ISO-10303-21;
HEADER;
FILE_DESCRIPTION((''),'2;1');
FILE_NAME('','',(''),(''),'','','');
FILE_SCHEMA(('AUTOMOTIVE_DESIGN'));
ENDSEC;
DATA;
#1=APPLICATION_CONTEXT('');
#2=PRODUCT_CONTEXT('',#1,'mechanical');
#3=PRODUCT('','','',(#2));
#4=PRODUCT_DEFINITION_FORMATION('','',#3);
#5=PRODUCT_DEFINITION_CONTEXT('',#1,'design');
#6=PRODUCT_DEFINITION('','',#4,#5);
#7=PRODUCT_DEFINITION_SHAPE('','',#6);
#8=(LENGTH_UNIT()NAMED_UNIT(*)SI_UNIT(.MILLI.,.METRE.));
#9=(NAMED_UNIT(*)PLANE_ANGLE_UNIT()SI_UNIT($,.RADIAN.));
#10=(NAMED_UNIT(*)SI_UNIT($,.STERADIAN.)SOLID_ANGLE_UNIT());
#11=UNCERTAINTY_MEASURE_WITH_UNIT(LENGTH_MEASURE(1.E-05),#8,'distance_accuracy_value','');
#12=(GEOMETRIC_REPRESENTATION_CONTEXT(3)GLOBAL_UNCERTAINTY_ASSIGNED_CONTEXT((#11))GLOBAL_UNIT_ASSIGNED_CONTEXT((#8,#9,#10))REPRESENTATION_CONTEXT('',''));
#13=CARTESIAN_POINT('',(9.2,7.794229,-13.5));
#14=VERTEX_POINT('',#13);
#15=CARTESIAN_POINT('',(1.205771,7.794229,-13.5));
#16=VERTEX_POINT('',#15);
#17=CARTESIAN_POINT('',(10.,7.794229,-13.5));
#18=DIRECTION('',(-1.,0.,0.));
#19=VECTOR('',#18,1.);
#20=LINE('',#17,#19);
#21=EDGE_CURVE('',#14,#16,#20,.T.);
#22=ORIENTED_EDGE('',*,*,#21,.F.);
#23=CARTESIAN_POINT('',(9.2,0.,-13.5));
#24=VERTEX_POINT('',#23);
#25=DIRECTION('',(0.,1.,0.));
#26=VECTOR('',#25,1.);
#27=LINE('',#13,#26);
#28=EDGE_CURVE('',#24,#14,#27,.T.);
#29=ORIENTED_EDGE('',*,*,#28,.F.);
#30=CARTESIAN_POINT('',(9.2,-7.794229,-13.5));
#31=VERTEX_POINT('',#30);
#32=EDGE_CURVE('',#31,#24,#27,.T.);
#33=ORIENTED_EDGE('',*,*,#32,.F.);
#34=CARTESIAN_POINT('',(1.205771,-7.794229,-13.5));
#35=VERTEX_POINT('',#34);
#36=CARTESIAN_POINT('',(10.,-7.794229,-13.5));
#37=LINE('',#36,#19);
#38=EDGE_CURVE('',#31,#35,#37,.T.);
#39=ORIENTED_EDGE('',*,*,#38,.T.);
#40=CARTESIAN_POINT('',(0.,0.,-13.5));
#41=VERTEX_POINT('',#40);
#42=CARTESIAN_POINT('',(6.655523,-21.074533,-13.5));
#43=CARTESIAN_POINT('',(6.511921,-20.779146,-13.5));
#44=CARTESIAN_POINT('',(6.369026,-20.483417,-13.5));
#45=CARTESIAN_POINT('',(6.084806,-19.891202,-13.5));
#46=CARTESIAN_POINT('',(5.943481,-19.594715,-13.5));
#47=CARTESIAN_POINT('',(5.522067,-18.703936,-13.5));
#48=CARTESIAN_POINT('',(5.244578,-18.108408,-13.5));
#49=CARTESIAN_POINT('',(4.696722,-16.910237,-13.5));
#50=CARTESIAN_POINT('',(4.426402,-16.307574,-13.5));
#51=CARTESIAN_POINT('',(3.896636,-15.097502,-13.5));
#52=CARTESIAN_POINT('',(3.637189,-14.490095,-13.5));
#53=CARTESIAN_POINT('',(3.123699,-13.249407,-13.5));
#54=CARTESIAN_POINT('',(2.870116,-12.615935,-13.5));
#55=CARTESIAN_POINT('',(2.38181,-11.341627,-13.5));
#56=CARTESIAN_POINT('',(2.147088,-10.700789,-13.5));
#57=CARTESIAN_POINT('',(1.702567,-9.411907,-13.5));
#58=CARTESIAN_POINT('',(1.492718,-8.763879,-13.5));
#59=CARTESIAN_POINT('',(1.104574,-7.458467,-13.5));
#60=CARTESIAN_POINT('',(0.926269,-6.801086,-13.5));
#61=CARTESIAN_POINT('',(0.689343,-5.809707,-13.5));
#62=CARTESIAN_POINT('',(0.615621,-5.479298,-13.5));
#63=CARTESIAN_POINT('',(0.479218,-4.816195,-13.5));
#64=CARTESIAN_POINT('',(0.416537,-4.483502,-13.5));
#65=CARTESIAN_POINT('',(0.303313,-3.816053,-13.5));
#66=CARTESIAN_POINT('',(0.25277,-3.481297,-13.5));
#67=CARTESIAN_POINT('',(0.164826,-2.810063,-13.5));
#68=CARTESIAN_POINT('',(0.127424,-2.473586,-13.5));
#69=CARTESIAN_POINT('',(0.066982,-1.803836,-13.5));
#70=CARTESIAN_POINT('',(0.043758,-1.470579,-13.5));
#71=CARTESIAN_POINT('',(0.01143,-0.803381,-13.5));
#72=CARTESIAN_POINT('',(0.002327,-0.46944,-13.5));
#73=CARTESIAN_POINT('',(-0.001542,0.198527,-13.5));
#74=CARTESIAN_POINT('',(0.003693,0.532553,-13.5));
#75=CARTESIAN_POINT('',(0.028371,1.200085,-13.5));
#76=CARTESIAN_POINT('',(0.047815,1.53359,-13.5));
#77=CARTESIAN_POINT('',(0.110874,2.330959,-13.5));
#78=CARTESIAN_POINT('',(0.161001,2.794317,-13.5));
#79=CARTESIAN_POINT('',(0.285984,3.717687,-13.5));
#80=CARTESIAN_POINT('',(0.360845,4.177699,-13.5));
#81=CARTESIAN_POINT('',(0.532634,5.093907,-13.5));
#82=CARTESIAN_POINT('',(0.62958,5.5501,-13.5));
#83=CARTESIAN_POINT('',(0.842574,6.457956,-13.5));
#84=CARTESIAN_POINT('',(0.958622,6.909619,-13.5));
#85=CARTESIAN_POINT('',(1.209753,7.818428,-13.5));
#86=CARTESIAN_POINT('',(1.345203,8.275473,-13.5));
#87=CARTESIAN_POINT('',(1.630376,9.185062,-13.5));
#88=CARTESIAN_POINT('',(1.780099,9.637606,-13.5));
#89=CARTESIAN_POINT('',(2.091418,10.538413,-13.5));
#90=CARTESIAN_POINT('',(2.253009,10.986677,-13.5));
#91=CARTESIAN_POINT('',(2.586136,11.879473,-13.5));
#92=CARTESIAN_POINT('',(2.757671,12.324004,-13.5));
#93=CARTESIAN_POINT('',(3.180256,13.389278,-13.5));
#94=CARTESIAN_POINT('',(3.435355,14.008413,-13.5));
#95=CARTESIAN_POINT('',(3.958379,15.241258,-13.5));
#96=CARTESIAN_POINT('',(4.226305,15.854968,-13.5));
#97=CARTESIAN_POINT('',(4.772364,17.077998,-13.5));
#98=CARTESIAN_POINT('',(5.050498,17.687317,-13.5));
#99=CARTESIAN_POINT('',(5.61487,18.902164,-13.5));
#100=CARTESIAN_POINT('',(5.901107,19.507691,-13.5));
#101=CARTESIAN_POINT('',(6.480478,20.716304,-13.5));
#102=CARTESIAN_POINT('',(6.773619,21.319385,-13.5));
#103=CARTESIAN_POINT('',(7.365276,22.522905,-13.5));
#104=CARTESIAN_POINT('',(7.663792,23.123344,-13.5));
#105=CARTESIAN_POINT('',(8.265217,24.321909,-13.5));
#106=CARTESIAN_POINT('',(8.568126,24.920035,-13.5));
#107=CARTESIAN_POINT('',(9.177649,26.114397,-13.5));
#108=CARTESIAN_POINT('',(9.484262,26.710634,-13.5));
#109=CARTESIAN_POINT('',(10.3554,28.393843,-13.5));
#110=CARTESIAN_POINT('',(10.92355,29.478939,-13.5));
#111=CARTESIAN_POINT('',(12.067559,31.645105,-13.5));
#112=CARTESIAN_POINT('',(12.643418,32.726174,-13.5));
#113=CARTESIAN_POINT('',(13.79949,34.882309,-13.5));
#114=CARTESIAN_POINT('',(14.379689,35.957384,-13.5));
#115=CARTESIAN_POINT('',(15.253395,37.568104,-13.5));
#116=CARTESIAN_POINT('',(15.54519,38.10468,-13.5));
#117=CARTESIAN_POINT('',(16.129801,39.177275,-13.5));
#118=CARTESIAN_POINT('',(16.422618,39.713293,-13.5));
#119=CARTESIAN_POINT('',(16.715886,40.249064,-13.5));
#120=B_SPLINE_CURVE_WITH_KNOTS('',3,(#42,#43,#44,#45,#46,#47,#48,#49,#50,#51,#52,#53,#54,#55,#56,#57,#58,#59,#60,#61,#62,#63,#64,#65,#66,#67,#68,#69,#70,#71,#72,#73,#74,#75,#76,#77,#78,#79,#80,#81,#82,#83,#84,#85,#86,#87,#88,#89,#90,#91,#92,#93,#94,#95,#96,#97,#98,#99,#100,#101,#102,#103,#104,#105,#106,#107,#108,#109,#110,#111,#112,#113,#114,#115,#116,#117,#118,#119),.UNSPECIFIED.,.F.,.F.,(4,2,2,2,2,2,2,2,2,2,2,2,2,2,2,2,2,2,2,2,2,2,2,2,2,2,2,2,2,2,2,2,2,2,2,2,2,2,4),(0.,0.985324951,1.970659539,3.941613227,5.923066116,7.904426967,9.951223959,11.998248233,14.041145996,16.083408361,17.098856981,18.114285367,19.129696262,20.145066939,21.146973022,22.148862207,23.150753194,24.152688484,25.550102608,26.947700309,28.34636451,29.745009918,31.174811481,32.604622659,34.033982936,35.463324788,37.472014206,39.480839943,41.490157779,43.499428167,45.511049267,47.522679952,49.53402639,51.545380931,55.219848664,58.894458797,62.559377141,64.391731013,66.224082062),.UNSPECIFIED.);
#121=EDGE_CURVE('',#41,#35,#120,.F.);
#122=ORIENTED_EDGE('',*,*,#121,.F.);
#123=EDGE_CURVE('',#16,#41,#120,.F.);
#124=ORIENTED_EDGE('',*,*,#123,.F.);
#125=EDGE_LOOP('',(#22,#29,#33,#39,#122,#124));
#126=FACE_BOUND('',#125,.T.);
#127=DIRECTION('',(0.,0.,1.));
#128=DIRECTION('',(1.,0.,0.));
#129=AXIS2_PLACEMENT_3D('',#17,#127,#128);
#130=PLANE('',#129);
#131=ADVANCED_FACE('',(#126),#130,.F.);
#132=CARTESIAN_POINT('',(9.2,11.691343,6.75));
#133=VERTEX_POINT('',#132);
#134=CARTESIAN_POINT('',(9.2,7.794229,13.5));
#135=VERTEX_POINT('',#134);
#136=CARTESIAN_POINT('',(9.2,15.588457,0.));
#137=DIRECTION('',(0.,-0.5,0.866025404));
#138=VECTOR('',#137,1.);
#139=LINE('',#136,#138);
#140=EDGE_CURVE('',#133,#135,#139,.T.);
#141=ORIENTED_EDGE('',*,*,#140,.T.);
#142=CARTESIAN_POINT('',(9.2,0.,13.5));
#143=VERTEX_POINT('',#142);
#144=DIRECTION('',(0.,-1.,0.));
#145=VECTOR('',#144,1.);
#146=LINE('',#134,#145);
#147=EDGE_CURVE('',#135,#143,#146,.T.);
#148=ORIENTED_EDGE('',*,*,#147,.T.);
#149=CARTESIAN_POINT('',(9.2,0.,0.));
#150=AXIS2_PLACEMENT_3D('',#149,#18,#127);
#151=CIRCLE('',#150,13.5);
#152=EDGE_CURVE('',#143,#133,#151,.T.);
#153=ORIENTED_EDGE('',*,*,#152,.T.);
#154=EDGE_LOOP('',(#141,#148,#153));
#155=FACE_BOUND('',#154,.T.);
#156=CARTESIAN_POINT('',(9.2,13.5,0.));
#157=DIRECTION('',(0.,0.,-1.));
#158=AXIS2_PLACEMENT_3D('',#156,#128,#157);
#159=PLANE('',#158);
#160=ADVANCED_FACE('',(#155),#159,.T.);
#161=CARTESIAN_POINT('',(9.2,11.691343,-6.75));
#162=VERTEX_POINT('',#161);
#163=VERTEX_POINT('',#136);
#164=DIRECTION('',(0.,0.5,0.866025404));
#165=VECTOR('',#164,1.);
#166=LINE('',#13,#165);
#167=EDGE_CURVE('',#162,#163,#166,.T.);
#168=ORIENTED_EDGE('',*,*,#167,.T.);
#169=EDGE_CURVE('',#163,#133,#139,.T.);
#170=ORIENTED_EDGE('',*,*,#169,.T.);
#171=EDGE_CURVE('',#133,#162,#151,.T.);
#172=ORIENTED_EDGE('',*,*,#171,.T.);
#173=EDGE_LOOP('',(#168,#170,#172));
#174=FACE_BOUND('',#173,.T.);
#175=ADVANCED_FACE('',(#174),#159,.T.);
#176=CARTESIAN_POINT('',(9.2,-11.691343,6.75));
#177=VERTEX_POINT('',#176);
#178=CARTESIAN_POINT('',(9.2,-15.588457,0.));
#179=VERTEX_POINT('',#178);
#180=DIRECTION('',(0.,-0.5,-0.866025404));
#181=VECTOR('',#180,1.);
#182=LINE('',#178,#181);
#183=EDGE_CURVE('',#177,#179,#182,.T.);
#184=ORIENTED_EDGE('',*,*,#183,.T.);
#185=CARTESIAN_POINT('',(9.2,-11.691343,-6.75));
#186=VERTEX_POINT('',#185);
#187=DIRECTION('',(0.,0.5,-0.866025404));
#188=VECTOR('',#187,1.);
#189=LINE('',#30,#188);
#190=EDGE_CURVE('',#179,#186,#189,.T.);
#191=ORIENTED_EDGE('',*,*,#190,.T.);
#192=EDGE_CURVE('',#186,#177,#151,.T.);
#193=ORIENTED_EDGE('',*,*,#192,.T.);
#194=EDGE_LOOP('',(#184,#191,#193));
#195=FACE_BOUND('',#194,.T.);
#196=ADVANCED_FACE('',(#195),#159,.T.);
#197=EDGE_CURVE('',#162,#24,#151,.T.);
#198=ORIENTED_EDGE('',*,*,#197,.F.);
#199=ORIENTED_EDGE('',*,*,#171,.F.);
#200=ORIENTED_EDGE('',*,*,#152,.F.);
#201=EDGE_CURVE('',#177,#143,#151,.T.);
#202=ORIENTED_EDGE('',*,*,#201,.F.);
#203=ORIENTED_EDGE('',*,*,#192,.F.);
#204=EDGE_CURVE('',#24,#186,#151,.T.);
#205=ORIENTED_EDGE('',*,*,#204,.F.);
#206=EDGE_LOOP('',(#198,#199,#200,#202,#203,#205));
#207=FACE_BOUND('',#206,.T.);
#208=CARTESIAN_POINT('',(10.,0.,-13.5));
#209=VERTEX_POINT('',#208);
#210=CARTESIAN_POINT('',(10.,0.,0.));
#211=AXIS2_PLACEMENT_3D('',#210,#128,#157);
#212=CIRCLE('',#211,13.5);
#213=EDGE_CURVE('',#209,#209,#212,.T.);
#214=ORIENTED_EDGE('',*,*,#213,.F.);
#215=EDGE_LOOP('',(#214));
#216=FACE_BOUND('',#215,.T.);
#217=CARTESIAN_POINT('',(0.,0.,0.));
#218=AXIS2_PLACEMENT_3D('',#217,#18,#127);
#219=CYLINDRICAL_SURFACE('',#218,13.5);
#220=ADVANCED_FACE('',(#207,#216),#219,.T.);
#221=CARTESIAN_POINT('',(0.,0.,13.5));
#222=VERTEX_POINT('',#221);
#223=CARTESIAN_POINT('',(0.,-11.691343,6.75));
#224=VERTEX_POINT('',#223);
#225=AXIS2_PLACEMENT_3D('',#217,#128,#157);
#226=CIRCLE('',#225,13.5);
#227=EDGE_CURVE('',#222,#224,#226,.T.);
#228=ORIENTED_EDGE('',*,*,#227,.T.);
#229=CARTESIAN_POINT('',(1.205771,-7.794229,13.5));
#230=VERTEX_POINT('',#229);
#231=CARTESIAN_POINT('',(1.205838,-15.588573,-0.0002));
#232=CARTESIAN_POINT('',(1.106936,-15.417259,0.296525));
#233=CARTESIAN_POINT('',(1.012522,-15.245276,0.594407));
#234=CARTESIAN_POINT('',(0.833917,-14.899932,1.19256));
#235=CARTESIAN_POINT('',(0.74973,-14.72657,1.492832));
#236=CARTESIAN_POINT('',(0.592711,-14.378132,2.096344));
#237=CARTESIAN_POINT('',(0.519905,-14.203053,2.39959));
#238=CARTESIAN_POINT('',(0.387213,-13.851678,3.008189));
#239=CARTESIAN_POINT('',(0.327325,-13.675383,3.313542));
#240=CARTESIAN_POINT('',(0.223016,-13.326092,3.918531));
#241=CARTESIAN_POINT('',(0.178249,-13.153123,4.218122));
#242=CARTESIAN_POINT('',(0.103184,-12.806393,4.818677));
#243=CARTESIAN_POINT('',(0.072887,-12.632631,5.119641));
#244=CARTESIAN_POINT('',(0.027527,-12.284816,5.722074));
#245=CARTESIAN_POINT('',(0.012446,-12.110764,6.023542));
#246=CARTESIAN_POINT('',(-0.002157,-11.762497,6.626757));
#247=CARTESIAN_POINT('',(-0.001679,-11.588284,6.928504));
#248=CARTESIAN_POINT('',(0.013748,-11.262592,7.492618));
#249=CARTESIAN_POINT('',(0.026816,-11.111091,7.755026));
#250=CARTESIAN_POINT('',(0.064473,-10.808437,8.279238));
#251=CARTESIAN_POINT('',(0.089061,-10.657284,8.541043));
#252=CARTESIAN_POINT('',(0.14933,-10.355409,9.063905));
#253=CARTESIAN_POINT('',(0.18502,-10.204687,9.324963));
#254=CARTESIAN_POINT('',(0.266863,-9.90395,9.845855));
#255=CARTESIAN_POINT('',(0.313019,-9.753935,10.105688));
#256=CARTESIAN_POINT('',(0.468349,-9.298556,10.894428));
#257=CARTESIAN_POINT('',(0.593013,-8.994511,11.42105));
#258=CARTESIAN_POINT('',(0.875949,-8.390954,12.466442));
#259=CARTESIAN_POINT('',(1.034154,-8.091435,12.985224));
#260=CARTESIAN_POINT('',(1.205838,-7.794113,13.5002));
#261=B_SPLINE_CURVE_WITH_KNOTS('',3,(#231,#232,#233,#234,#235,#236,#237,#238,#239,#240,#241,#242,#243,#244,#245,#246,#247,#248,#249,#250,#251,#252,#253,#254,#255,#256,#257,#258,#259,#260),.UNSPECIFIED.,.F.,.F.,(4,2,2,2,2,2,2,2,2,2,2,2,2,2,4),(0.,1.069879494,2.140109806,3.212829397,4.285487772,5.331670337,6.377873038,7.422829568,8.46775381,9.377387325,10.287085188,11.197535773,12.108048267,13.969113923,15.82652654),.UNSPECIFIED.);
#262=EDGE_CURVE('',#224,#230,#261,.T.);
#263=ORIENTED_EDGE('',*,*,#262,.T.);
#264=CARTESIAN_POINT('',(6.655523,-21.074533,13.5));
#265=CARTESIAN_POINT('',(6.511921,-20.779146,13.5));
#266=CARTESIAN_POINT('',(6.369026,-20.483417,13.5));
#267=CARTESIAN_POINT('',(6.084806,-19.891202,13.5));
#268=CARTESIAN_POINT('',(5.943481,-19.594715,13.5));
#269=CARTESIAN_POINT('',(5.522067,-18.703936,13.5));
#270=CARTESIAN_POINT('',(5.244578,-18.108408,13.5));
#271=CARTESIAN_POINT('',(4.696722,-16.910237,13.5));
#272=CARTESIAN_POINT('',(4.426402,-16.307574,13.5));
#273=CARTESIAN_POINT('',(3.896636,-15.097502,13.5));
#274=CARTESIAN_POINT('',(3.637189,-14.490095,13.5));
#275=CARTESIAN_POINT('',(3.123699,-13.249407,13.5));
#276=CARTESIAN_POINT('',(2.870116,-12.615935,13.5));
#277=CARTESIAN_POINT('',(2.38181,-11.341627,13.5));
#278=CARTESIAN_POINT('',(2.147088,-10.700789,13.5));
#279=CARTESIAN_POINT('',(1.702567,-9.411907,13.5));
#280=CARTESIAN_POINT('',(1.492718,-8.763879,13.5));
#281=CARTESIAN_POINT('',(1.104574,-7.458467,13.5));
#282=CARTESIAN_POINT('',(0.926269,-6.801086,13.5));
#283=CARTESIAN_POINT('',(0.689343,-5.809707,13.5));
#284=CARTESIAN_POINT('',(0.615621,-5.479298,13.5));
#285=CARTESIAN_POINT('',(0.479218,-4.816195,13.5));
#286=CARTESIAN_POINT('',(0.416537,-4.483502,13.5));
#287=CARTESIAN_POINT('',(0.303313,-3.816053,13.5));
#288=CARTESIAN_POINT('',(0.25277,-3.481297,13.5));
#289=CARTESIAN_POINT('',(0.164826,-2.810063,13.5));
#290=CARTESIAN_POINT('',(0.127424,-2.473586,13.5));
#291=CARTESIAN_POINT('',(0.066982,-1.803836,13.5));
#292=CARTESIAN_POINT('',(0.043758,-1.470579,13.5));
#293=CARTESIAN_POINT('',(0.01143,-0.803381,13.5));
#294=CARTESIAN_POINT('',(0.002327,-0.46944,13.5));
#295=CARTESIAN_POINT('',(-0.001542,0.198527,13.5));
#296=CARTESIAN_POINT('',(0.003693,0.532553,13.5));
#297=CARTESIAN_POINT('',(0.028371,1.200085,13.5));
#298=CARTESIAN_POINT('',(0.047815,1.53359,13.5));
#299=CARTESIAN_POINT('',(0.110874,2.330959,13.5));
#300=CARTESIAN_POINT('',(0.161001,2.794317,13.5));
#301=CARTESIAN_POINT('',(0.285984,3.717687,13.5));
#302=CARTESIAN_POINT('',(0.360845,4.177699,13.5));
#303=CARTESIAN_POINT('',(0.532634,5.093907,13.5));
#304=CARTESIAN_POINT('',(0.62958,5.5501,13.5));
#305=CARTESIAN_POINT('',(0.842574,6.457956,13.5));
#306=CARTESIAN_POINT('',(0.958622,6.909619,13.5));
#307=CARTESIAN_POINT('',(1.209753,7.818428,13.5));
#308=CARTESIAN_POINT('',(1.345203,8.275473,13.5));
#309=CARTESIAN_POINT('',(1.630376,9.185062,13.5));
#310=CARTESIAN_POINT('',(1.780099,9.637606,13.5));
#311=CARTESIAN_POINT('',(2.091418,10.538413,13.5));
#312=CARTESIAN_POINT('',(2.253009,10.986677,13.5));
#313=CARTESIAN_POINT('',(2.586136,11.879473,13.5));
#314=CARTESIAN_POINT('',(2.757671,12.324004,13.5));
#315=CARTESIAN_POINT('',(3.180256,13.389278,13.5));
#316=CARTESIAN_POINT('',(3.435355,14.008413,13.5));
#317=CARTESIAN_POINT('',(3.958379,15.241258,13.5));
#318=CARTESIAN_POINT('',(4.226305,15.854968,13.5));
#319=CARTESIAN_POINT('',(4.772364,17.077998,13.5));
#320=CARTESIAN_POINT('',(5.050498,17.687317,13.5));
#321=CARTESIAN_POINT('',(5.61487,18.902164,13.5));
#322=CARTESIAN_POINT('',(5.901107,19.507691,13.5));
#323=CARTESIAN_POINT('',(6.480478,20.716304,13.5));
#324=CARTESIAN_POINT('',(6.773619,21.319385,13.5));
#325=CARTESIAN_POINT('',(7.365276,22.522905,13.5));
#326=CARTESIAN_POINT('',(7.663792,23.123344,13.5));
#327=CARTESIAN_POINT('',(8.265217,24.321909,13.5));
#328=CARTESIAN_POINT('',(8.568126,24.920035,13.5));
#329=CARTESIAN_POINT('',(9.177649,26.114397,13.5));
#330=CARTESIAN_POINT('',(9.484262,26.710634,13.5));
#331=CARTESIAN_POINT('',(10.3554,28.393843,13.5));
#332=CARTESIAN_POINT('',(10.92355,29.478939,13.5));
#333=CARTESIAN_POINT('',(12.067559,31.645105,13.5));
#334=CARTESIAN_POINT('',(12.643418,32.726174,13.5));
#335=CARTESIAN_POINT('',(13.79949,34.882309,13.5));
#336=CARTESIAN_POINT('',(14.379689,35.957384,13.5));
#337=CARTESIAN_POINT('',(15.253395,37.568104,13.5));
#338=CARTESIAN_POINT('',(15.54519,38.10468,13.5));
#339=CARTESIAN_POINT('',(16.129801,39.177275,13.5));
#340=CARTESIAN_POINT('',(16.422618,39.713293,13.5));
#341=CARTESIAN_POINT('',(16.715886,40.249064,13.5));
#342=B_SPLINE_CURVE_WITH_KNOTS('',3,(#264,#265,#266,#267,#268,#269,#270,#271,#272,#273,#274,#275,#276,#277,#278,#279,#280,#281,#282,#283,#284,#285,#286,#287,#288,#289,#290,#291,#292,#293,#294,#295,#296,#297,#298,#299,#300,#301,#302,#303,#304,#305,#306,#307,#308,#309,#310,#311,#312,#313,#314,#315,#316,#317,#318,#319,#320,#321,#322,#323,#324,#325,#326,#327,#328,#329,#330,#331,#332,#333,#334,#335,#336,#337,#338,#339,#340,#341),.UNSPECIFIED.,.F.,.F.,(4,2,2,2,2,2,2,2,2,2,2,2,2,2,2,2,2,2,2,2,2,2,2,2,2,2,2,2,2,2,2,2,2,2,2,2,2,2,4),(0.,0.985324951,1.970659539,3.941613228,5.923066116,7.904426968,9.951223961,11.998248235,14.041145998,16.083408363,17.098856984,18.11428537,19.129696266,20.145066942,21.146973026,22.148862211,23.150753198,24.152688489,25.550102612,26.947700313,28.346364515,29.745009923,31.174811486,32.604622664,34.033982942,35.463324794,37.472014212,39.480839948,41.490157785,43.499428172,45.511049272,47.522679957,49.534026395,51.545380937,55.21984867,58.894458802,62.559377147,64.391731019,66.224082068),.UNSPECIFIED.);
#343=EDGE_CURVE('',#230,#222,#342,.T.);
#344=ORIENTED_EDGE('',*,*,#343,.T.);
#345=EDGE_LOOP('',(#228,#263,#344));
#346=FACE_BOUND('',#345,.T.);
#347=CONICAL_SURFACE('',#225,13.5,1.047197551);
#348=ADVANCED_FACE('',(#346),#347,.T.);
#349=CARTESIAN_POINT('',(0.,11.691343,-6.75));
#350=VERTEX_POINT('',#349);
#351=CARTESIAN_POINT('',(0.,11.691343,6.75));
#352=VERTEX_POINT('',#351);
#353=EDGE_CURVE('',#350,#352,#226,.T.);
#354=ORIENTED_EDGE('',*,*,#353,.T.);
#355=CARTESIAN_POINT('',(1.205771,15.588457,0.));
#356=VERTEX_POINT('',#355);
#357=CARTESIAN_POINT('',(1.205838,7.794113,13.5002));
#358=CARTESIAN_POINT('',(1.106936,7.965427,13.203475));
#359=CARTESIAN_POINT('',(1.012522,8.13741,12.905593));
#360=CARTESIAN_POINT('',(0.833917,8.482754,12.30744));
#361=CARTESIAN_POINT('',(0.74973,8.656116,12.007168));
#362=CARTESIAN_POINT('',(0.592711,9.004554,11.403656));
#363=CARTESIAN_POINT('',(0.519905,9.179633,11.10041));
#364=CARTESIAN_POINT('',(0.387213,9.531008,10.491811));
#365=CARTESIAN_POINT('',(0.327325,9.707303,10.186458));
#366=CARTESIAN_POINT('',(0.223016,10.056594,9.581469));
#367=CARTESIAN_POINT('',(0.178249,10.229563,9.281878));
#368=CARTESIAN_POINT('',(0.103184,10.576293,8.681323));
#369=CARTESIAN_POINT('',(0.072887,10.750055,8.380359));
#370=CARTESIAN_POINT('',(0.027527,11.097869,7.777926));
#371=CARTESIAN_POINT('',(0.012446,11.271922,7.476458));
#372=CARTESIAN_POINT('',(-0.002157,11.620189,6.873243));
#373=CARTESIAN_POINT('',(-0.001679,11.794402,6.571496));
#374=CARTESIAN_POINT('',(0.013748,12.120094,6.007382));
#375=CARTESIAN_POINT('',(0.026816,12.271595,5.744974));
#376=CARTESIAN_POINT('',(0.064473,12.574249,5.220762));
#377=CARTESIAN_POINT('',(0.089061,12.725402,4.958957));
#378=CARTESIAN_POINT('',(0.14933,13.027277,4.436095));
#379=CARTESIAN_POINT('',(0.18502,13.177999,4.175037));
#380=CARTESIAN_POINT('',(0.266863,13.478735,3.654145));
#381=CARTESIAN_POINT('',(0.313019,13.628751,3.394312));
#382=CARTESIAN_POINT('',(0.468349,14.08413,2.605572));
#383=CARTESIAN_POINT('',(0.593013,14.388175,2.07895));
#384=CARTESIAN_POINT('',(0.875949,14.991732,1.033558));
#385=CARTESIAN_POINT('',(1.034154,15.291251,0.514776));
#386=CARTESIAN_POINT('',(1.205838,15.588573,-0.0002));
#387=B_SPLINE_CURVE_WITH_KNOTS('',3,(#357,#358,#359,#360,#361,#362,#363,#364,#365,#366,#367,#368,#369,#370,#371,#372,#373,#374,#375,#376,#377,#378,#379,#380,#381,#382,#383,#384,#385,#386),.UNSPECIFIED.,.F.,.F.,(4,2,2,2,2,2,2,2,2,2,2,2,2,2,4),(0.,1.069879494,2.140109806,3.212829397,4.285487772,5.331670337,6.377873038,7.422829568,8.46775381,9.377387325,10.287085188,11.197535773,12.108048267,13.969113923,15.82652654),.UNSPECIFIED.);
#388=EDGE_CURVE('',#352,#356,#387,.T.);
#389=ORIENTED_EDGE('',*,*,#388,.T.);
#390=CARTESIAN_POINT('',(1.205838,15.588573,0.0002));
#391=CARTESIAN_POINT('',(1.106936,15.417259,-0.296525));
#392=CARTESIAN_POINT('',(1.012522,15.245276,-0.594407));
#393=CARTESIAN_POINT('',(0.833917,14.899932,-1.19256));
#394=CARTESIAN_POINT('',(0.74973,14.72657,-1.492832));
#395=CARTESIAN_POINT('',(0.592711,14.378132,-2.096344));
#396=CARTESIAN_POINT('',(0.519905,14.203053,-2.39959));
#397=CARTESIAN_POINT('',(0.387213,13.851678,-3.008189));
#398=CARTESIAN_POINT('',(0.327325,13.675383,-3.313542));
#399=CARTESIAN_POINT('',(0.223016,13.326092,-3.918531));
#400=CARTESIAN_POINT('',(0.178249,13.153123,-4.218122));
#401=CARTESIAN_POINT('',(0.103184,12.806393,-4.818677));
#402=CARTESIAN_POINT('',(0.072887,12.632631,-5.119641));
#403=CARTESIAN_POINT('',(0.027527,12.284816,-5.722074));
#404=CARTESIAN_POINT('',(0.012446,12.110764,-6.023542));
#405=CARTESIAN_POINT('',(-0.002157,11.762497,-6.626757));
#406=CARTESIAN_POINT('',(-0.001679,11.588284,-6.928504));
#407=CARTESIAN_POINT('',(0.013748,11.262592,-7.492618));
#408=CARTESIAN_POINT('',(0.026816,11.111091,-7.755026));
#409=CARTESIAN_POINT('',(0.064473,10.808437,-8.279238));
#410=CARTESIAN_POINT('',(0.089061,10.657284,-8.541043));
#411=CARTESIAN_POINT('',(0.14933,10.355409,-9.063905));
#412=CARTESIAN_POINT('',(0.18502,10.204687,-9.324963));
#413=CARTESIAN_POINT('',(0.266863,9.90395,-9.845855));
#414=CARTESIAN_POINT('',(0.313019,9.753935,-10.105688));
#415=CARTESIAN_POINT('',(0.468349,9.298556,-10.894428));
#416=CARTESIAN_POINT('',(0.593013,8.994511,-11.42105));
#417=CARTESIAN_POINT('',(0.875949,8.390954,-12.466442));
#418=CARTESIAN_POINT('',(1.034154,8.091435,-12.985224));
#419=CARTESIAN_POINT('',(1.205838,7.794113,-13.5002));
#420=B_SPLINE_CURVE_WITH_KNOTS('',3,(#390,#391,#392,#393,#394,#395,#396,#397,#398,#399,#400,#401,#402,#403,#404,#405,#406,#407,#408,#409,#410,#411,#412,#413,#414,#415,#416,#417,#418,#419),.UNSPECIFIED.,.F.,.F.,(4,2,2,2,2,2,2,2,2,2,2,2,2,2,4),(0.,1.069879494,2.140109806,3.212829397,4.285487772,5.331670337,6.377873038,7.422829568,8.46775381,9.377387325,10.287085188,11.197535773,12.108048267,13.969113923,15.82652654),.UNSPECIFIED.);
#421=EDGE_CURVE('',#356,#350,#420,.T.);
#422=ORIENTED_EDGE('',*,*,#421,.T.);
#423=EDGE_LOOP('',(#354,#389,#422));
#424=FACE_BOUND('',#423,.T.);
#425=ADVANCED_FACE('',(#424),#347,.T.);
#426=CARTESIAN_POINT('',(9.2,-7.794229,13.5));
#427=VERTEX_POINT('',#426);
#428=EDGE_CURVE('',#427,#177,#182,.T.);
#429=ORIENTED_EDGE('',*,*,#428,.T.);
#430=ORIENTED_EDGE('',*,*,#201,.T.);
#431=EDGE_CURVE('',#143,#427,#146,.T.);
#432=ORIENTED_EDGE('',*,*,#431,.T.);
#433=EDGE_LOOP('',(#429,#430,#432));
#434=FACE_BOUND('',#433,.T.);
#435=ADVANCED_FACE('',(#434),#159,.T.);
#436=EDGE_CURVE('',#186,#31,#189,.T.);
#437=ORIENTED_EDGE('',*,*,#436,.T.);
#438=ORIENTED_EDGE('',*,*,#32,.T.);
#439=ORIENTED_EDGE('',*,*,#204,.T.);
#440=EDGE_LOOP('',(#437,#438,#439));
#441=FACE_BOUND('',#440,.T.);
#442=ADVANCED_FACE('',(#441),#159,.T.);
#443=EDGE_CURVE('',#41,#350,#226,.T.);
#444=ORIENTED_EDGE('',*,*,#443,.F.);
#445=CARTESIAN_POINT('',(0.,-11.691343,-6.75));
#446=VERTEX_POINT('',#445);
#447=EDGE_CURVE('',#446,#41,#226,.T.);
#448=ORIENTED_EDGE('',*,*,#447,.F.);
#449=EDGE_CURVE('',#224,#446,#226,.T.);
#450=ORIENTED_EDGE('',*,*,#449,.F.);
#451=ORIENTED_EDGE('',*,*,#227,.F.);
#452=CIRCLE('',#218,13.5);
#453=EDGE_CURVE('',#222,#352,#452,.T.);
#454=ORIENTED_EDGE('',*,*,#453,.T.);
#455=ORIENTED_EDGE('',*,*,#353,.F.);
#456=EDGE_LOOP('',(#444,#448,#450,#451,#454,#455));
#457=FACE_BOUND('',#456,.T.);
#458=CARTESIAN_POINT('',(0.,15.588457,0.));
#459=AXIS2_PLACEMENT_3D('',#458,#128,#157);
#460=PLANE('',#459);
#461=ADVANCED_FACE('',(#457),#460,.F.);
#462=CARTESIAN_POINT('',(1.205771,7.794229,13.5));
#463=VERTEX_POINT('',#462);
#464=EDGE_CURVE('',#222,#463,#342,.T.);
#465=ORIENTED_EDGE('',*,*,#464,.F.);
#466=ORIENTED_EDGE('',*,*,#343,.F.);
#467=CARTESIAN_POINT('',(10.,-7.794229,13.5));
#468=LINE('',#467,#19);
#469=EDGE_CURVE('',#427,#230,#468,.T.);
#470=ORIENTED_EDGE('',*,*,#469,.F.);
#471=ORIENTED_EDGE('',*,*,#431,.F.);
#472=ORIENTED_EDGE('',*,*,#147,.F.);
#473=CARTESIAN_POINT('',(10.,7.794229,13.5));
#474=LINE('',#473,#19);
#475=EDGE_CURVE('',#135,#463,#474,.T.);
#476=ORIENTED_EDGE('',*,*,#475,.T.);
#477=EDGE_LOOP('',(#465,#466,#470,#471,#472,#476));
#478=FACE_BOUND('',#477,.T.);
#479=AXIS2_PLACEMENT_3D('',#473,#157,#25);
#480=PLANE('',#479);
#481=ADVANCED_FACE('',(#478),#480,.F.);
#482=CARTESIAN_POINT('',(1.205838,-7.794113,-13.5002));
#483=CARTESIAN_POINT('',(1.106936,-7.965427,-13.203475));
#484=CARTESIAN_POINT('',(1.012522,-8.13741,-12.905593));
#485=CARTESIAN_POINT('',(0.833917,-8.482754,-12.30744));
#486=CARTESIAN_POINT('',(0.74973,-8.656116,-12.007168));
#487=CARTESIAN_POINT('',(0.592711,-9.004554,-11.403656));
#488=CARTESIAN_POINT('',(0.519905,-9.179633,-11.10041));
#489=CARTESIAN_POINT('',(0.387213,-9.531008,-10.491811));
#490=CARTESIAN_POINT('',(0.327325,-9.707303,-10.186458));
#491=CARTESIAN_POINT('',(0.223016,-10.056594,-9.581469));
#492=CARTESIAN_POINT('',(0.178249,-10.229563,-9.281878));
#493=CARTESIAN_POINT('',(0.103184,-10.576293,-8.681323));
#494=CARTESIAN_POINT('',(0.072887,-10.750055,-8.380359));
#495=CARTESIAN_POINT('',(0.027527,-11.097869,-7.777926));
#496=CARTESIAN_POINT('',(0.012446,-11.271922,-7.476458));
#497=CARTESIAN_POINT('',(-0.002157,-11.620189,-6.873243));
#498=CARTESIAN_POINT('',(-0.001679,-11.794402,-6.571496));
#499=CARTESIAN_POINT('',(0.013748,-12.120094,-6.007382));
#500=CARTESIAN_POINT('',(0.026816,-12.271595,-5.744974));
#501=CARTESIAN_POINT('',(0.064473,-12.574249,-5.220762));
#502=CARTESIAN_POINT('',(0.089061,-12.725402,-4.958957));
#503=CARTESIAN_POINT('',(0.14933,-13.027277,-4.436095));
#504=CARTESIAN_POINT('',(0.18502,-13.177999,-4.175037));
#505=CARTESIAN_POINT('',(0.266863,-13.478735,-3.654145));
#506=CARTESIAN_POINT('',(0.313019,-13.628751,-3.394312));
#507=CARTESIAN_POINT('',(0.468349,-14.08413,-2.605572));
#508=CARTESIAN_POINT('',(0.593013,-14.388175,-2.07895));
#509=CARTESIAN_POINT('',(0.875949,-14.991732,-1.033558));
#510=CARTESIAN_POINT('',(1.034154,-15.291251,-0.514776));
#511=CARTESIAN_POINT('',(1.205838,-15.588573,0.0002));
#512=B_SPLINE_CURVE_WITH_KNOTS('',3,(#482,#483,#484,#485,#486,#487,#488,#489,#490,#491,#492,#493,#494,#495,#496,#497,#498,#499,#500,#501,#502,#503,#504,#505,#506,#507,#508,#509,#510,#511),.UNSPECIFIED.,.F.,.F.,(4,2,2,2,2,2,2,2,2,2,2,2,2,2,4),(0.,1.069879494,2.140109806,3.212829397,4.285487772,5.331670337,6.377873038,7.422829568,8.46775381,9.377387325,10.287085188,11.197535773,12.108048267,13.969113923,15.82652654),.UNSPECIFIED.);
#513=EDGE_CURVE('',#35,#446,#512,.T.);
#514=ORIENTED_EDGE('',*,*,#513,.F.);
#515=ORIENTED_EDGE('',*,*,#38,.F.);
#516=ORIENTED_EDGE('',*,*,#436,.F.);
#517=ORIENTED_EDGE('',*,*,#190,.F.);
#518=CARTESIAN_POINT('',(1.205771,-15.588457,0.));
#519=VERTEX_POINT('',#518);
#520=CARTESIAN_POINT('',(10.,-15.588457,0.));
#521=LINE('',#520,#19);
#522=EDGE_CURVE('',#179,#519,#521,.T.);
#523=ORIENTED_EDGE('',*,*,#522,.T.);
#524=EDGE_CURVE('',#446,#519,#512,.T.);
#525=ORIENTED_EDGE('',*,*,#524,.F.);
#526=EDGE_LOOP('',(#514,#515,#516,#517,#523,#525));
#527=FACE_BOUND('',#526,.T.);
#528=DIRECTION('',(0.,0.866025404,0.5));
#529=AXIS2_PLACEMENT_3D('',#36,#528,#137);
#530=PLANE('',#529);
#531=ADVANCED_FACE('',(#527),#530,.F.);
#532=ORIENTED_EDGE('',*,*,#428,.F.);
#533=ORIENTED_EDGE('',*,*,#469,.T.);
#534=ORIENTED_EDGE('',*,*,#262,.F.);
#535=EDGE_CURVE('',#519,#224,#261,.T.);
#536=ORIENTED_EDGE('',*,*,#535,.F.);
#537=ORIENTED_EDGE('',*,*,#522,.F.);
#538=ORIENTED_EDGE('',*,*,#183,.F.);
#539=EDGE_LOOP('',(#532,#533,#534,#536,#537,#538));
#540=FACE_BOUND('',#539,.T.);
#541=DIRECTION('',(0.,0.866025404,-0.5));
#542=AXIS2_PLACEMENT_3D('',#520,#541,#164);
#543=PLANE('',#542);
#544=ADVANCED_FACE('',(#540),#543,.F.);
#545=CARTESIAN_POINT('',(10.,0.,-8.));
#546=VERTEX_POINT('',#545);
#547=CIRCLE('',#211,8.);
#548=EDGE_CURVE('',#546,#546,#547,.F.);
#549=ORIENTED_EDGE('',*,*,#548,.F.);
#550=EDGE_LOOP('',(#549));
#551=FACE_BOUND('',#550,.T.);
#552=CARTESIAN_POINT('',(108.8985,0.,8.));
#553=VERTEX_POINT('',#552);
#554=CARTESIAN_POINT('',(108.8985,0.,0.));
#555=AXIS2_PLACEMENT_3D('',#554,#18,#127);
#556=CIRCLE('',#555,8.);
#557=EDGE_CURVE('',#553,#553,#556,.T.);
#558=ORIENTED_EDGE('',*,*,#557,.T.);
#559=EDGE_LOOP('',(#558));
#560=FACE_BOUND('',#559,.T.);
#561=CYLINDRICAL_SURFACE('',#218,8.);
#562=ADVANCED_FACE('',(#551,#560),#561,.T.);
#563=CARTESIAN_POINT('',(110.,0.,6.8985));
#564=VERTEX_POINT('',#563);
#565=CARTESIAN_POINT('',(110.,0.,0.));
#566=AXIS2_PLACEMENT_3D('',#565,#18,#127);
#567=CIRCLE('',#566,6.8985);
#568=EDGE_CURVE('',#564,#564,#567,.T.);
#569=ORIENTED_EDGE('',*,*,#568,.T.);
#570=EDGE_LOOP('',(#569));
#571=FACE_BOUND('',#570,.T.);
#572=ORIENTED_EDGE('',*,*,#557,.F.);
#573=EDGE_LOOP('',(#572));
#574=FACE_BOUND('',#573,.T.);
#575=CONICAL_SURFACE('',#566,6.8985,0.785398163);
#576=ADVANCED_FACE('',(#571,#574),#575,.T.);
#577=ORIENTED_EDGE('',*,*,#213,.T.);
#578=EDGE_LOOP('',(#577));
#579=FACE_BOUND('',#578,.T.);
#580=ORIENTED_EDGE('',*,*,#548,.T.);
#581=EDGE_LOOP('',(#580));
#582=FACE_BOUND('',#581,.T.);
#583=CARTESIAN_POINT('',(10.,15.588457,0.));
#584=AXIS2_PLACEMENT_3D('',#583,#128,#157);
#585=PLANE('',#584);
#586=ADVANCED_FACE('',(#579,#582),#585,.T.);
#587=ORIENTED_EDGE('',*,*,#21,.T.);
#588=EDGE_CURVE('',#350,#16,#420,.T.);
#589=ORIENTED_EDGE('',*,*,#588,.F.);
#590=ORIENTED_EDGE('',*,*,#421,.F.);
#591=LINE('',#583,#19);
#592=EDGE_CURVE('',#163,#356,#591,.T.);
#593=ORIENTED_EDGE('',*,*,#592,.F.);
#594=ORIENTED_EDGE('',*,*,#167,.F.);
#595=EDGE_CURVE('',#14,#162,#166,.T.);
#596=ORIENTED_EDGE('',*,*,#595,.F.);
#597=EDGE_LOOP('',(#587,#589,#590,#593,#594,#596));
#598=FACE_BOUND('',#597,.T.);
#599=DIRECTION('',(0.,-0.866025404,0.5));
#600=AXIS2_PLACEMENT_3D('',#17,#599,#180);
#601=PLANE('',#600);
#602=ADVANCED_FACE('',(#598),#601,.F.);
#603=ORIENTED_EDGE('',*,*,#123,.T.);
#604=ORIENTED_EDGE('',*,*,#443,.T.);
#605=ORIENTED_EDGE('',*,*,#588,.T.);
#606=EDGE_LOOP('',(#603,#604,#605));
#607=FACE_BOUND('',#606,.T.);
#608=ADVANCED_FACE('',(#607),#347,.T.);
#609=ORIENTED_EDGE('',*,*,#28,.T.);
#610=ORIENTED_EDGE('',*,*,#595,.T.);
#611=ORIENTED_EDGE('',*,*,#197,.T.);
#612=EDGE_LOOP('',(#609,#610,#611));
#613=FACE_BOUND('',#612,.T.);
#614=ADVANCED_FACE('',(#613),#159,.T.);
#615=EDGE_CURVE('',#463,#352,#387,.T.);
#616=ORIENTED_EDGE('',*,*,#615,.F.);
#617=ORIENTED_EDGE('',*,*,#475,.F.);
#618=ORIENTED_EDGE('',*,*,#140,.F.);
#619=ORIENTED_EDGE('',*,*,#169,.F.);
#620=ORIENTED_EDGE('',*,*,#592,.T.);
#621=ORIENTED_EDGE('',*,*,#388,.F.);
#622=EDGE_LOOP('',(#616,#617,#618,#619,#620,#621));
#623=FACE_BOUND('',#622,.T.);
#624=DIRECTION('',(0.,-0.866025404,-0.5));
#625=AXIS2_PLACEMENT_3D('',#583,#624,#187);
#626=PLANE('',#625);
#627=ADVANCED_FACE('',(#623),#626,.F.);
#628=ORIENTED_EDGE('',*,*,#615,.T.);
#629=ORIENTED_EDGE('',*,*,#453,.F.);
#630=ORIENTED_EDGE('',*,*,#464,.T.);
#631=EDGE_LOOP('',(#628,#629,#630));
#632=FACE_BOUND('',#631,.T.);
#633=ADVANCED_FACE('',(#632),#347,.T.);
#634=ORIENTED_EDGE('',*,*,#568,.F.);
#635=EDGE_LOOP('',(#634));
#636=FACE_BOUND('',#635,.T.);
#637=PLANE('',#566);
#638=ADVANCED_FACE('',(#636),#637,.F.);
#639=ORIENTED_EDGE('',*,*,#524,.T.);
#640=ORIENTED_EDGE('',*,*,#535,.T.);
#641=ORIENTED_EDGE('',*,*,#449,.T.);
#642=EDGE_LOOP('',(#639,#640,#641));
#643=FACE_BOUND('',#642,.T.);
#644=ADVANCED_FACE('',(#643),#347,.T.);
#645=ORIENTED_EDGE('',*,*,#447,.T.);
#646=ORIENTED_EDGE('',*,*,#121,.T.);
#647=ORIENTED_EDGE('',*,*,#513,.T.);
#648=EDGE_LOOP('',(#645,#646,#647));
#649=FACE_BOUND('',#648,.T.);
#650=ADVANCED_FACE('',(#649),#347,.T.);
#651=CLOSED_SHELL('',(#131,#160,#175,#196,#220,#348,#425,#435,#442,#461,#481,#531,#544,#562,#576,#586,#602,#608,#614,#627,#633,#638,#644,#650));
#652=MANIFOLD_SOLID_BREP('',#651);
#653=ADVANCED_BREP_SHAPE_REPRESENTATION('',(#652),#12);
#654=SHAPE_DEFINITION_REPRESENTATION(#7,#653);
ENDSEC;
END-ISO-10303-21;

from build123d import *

# Parameters (mm, degrees)
BASEHEAD_DEPTH = 10
SKETCH4_W      = 0.8
SKETCH4_H      = 12.088457268


# Read off the part's stored shape, not the designer's step: HeadChamfer
with BuildPart() as part:
    # Sketch1 → BaseHead (new body)
    with BuildSketch(Plane(origin=(0, 0, 0), x_dir=(0, 0, -1), z_dir=(1, 0, 0))):
        Polygon((13.5, 7.794228634), (13.5, -7.794228634), (0, -15.588457268), (-13.5, -7.794228634), (-13.5, 7.794228634), (0, 15.588457268), align=None)
    extrude(amount=BASEHEAD_DEPTH)

    # HeadChamfer outline → HeadChamfer (revolve, cut)
    with BuildSketch(Plane.YX):
        Polygon((15.58845727, 1.205771367), (13.499999851, -8.6e-08), (15.58845727, -8.6e-08), align=None)
    revolve(axis=Axis((0, 0, 0), (1, 0, 0)), mode=Mode.SUBTRACT)

    # HeadChamfer 2 outline → HeadChamfer 2 (revolve)
    with BuildSketch(Plane.YX):
        Polygon((8, 10), (8, 108.8985), (6.8985, 110), (0, 110), (0, 10), align=None)
    revolve(axis=Axis((0, 0, 0), (1, 0, 0)))

    # Sketch4 → BearingFace (revolve, cut)
    with BuildSketch(Plane.XY, mode=Mode.PRIVATE) as bearingface_sk:
        with Locations((9.6, 19.544228634)):
            Rectangle(SKETCH4_W, SKETCH4_H)
    revolve(bearingface_sk.sketch.rotate(Axis((0, 0, 0), (1, 0, 0)), 90), axis=Axis((0, 0, 0), (1, 0, 0)), mode=Mode.SUBTRACT)


solid = part.part
